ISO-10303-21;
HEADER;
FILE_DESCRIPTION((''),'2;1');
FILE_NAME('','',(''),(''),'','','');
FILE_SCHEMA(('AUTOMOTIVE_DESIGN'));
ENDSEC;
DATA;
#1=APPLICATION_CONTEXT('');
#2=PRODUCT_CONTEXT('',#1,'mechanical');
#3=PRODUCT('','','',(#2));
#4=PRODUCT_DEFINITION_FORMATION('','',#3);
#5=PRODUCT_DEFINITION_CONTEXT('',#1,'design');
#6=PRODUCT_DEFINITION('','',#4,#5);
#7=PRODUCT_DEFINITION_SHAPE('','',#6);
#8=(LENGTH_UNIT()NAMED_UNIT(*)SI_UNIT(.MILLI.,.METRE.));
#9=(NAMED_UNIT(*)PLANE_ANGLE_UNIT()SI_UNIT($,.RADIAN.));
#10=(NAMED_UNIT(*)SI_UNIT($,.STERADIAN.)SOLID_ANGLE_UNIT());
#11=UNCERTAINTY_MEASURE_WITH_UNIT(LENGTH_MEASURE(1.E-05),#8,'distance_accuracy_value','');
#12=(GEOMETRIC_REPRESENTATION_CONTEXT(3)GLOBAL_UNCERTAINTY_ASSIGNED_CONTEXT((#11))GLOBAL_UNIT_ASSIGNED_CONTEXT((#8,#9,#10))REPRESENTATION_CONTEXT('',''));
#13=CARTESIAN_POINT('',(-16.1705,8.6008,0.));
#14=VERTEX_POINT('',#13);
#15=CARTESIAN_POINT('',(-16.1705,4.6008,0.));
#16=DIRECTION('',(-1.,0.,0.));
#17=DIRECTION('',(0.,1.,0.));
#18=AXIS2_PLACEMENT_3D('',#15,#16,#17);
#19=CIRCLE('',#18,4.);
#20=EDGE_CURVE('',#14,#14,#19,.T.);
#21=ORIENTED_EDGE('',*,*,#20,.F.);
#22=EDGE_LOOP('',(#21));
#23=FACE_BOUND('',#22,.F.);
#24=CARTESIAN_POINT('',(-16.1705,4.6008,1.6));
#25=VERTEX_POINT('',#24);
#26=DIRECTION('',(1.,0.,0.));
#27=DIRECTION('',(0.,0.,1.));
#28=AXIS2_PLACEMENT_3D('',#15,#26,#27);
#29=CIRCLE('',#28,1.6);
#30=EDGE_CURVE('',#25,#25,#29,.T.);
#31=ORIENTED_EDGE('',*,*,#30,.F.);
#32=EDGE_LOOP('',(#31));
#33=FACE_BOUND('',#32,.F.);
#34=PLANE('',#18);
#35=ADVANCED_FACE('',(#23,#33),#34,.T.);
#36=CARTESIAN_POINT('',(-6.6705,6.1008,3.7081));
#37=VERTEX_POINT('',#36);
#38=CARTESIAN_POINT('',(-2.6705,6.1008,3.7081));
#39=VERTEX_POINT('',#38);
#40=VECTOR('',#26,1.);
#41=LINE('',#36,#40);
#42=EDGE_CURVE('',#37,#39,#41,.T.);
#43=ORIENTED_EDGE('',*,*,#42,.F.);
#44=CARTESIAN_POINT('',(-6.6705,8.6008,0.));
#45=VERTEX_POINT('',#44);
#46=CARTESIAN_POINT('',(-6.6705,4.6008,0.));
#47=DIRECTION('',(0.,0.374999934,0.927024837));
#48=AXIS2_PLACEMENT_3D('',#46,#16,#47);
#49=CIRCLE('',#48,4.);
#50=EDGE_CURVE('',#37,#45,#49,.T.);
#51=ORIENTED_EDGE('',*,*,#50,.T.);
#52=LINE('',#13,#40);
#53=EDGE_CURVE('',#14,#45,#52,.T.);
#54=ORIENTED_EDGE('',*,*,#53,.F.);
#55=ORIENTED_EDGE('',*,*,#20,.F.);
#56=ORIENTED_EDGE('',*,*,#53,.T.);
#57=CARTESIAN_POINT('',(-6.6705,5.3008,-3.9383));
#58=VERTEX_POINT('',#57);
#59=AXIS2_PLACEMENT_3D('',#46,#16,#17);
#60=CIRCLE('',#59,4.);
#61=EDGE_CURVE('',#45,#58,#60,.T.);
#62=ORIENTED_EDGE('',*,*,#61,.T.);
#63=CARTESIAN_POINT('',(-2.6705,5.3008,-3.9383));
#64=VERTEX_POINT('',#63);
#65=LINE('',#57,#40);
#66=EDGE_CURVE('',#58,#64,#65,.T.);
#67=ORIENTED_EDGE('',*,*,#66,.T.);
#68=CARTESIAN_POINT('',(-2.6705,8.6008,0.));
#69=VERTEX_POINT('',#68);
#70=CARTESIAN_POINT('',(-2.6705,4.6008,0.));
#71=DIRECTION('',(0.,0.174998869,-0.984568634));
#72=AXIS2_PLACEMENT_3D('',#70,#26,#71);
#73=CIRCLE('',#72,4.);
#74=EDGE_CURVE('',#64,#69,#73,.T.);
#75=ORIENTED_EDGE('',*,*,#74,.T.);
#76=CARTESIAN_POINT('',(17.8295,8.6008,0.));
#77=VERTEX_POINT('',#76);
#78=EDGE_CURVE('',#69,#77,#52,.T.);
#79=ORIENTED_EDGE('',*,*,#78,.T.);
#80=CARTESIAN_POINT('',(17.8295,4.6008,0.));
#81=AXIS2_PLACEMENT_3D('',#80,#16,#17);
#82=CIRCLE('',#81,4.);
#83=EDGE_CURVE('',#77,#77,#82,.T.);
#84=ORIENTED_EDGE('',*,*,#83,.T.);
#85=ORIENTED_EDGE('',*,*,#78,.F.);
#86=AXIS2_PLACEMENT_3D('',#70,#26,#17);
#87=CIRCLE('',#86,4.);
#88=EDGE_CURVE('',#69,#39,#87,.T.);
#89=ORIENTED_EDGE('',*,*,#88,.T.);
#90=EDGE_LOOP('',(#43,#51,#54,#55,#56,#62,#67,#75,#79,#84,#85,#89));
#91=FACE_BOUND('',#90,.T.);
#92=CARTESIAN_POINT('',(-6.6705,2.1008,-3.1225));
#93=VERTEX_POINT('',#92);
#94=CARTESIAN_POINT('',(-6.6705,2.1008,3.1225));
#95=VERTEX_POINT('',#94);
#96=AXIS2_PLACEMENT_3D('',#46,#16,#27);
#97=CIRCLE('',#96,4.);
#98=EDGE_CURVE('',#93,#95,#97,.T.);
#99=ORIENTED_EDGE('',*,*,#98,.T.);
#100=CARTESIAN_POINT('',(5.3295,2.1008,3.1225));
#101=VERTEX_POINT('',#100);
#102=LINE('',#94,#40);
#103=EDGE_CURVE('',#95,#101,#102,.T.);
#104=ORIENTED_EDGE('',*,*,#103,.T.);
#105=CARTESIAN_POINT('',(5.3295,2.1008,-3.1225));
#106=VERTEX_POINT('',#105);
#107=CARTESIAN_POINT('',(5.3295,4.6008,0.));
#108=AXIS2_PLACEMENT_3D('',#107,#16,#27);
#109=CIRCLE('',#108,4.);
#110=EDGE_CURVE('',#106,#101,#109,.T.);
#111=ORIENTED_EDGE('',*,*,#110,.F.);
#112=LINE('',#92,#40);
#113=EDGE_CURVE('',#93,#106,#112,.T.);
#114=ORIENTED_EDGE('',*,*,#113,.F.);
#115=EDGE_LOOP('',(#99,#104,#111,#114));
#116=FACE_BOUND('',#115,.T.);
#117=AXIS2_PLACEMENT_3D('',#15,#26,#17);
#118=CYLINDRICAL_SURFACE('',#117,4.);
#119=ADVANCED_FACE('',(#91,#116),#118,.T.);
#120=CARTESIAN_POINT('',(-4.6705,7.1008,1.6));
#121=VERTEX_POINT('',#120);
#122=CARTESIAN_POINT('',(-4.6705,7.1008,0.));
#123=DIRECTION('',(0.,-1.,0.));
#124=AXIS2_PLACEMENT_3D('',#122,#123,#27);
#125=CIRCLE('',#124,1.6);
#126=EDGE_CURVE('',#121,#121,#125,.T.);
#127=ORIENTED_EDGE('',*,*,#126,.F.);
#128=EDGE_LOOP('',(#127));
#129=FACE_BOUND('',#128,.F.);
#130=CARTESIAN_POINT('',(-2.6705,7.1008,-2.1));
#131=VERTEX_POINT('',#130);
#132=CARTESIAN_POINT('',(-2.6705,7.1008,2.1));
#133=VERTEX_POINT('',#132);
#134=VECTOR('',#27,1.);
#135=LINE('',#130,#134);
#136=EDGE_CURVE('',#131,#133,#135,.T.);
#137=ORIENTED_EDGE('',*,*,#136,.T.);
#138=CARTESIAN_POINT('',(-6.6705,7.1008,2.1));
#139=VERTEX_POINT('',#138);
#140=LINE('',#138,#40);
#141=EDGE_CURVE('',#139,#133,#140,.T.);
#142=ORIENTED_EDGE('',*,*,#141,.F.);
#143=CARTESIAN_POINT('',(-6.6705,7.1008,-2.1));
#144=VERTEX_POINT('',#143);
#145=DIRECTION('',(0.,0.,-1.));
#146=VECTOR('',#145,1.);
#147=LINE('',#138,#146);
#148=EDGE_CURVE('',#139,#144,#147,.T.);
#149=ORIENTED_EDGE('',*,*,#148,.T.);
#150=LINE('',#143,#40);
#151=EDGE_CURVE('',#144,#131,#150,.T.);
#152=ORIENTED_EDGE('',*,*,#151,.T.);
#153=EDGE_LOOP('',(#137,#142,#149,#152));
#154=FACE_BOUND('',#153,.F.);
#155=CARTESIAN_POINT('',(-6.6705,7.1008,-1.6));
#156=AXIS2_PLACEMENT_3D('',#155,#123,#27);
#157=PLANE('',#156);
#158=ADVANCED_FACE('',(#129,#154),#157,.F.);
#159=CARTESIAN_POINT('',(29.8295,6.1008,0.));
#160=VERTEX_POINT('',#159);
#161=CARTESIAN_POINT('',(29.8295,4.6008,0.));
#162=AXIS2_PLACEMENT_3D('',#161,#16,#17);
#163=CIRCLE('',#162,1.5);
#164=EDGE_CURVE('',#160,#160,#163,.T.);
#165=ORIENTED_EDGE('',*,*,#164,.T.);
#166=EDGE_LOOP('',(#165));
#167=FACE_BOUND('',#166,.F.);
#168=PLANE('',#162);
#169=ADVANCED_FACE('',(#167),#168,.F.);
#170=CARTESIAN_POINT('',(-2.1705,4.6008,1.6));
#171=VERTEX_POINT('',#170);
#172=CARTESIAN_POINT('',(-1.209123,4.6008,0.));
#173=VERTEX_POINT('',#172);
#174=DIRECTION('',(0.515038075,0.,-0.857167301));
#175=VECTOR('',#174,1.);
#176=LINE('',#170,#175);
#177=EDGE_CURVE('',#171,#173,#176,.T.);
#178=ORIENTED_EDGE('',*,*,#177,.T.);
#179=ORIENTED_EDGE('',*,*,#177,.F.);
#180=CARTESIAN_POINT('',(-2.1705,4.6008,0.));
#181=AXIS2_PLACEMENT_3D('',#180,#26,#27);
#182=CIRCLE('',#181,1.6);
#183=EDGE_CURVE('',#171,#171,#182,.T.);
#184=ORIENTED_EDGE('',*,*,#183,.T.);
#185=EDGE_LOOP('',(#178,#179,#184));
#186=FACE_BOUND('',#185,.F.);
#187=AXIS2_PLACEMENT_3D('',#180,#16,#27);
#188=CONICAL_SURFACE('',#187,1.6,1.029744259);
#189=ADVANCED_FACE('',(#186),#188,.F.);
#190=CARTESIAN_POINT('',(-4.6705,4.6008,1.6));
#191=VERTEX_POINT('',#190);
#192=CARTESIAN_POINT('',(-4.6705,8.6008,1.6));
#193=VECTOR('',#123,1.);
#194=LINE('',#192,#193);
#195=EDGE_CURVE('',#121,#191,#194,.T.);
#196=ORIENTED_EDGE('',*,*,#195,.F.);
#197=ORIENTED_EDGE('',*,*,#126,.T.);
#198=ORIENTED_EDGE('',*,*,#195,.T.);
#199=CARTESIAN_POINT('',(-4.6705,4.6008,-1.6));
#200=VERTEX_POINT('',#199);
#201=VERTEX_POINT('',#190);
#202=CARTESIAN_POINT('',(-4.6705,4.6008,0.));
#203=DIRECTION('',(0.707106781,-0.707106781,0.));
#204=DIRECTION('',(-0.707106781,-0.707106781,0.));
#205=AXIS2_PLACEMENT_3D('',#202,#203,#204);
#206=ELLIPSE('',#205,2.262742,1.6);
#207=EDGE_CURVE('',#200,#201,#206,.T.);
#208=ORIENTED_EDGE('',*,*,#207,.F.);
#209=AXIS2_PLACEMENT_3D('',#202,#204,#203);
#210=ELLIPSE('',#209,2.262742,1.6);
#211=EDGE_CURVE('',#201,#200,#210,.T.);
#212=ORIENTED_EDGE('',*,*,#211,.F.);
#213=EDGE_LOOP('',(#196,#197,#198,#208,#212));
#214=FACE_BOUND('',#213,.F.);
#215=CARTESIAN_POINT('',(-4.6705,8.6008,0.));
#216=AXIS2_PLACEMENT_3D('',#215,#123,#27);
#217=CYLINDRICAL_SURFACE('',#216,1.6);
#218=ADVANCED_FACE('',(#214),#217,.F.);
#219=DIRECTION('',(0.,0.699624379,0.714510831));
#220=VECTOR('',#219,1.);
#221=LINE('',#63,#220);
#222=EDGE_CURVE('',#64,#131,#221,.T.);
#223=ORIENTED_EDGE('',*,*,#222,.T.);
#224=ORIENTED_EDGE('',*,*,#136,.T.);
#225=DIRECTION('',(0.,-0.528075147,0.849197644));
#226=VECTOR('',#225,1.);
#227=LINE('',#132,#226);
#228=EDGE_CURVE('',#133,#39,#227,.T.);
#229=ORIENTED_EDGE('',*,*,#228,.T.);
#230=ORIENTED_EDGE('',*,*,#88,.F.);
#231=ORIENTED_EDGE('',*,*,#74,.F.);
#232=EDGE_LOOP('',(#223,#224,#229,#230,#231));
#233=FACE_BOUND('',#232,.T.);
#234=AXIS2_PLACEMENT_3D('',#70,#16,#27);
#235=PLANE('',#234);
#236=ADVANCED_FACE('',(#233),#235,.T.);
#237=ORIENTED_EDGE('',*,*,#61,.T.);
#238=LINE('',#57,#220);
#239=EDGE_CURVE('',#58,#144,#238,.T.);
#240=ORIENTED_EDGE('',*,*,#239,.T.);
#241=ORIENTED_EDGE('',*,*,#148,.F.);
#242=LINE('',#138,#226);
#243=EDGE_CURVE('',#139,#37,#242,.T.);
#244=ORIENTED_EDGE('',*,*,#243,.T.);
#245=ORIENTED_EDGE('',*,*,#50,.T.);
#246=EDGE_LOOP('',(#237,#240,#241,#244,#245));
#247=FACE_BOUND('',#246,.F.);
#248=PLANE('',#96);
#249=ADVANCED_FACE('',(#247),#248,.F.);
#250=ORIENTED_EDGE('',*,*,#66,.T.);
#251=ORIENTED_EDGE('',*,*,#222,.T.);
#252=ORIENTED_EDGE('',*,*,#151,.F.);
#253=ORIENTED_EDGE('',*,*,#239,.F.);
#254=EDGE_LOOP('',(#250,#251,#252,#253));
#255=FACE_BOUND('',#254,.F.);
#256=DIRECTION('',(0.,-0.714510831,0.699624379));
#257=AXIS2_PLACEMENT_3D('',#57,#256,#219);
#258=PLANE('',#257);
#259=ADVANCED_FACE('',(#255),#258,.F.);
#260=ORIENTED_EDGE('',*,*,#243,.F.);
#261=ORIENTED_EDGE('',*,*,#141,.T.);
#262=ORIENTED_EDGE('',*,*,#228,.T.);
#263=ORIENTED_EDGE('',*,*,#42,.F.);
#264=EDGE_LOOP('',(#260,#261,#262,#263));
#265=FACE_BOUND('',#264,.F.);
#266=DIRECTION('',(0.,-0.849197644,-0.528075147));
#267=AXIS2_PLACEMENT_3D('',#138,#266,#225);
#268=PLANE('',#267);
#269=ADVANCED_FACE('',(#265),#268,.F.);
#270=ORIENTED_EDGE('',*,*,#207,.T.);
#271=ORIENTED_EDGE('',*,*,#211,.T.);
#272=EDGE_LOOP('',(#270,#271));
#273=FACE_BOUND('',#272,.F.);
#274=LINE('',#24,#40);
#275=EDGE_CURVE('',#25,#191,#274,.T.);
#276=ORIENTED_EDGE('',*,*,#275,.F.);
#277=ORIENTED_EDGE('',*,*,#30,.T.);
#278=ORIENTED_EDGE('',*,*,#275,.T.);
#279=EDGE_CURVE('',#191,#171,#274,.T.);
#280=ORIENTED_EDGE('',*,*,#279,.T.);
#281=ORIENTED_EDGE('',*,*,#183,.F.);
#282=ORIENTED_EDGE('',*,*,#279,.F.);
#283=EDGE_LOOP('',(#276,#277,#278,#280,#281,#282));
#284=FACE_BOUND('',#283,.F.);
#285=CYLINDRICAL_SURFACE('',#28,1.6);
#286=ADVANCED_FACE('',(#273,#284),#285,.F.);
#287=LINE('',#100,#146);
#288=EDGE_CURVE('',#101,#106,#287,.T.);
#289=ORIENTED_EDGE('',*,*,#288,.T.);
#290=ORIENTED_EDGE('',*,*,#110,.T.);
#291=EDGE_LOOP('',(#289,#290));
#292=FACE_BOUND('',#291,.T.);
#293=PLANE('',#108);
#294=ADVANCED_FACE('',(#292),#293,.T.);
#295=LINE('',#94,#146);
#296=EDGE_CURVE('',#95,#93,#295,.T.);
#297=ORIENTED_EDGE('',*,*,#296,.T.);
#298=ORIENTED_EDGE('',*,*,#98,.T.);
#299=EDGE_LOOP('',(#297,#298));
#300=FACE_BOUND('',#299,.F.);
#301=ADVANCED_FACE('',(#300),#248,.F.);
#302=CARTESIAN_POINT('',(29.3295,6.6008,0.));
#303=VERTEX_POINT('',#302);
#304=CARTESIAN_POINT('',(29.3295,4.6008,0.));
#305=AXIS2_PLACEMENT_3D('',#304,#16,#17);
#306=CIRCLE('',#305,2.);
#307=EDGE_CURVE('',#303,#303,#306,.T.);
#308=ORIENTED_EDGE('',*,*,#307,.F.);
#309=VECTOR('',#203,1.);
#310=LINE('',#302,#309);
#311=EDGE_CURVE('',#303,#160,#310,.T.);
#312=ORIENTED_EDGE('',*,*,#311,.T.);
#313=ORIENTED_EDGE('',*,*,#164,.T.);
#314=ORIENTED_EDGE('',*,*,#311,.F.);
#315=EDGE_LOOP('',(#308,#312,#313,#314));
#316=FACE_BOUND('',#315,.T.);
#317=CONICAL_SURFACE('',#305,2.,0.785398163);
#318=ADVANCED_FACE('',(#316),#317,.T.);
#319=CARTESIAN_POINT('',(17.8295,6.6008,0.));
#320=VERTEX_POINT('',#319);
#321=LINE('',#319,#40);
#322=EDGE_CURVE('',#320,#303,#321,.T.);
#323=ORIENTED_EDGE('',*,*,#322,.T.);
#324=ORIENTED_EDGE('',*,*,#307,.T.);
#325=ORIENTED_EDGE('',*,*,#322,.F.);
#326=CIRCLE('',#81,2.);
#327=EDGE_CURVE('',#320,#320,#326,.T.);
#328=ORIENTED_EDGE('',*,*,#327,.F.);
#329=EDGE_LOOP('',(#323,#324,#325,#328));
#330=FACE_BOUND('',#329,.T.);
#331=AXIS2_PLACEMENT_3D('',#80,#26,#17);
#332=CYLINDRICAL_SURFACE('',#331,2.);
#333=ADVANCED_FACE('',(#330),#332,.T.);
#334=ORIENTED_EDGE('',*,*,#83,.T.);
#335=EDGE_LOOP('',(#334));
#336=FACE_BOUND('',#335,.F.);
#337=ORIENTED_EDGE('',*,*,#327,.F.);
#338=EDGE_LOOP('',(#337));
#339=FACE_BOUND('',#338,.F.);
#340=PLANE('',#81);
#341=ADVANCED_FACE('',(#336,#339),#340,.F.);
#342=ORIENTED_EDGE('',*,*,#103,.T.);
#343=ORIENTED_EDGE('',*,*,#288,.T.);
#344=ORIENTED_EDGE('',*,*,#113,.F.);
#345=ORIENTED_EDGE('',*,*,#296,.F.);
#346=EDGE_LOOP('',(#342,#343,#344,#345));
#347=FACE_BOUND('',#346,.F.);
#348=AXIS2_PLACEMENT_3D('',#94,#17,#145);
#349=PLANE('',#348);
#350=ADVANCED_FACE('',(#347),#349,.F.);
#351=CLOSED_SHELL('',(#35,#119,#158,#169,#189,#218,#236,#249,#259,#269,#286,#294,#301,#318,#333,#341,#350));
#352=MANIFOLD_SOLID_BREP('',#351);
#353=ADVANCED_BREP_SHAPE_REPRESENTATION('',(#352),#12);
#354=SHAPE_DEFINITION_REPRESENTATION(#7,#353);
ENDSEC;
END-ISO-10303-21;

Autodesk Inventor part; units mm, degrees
ref_plane "YZ Ebene" through (0, 0, 0) normal (1, 0, 0) x (0, 1, 0)
sketch "Skizze1" plane through (0, 0, 0) normal (0, 0, 1) x (1, 0, 0)
  line L0 (-16.1705, 4.6008) -> (-16.1705, 8.6008)
  line L1 (-16.1705, 8.6008) -> (17.8295, 8.6008)
  line L2 (17.8295, 8.6008) -> (17.8295, 6.6008)
  line L3 (17.8295, 6.6008) -> (29.8295, 6.6008)
  line L4 (29.8295, 6.6008) -> (29.8295, 4.6008)
  line L5 (29.8295, 4.6008) -> (-16.1705, 4.6008)
  dimension "d0" = 46
  dimension "d1" = 12
  dimension "d2" = 4
  dimension "d3" = 8
revolve "Grundkörper" add sketch "Skizze1" angle 360 about axis through (29.8295, 4.6008, 0) along (-1, 0, 0)
sketch "Skizze2" plane through (-16.1705, 4.6008, 0) normal (-1, 0, 0) x (0, 0, 1)
  circle A0 centre (0, 0) radius 4 projected
hole "3,2 Bohrung axial" at (-16.1705, 4.6008, 0) direction (1, 0, 0) diameter 3.2 depth 14 tip angle 118
chamfer "Fase 0,5x45" distance 0.5 angle 45 1 edges at (29.8295, 2.6008, 0)
ref_plane "Arbeitsebene1" through (0.8295, 8.6008, 0) normal (0, 1, 0) x (-1, 0, 0)
sketch "Skizze3" plane through (0.8295, 8.6008, 0) normal (0, 1, 0) x (-1, 0, 0)
  line L0 (17, 4) -> (17, -4) projected
  point P0 (5.5, 0)
  dimension "d14" = 11.5
hole "3,2 Bohrung radial" at (-4.6705, 8.6008, 0) direction (0, -1, 0) diameter 3.2 end up to surface
ref_plane "Arbeitsebene2" through (-6.6705, 4.6008, 0) normal (-1, 0, 0) x (0, 0, 1)
sketch "Skizze5" plane through (-6.6705, 4.6008, 0) normal (-1, 0, 0) x (0, 0, 1)
  line L0 (-1.6, 0) -> (-1.6, 3.6661) projected
  circle A0 centre (0, 0) radius 4 projected
  line L1 (1.6, 0) -> (1.6, 3.6661) projected
  line L2 (-3.9383, 0.7) -> (-2.1, 2.5)
  line L3 (-2.1, 2.5) -> (2.1, 2.5)
  line L4 (2.1, 2.5) -> (3.7081, 1.5)
  line L5 (3.1225, -2.5) -> (-3.1225, -2.5)
  line L6 (0, -4) -> (0, 4) construction
  dimension "d31" = 1.5
  dimension "d32" = 4
  dimension "d33" = 3.2
  dimension "d34" = 5
  dimension "d35" = 0.5
  dimension "d36" = 0.5
extrude "Entlüftungssteuerschlitz" cut sketch "Skizze5" against normal blind 4 contours L3 L2 A0 L0 | L0 A0 L1 L3 | L1 A0 L4 L3
extrude "Belüftungssteuerschlitz" cut sketch "Skizze5" against normal blind 12 contours L5 A0
properties part number "Kurbelwelle" material "CuZn40"
